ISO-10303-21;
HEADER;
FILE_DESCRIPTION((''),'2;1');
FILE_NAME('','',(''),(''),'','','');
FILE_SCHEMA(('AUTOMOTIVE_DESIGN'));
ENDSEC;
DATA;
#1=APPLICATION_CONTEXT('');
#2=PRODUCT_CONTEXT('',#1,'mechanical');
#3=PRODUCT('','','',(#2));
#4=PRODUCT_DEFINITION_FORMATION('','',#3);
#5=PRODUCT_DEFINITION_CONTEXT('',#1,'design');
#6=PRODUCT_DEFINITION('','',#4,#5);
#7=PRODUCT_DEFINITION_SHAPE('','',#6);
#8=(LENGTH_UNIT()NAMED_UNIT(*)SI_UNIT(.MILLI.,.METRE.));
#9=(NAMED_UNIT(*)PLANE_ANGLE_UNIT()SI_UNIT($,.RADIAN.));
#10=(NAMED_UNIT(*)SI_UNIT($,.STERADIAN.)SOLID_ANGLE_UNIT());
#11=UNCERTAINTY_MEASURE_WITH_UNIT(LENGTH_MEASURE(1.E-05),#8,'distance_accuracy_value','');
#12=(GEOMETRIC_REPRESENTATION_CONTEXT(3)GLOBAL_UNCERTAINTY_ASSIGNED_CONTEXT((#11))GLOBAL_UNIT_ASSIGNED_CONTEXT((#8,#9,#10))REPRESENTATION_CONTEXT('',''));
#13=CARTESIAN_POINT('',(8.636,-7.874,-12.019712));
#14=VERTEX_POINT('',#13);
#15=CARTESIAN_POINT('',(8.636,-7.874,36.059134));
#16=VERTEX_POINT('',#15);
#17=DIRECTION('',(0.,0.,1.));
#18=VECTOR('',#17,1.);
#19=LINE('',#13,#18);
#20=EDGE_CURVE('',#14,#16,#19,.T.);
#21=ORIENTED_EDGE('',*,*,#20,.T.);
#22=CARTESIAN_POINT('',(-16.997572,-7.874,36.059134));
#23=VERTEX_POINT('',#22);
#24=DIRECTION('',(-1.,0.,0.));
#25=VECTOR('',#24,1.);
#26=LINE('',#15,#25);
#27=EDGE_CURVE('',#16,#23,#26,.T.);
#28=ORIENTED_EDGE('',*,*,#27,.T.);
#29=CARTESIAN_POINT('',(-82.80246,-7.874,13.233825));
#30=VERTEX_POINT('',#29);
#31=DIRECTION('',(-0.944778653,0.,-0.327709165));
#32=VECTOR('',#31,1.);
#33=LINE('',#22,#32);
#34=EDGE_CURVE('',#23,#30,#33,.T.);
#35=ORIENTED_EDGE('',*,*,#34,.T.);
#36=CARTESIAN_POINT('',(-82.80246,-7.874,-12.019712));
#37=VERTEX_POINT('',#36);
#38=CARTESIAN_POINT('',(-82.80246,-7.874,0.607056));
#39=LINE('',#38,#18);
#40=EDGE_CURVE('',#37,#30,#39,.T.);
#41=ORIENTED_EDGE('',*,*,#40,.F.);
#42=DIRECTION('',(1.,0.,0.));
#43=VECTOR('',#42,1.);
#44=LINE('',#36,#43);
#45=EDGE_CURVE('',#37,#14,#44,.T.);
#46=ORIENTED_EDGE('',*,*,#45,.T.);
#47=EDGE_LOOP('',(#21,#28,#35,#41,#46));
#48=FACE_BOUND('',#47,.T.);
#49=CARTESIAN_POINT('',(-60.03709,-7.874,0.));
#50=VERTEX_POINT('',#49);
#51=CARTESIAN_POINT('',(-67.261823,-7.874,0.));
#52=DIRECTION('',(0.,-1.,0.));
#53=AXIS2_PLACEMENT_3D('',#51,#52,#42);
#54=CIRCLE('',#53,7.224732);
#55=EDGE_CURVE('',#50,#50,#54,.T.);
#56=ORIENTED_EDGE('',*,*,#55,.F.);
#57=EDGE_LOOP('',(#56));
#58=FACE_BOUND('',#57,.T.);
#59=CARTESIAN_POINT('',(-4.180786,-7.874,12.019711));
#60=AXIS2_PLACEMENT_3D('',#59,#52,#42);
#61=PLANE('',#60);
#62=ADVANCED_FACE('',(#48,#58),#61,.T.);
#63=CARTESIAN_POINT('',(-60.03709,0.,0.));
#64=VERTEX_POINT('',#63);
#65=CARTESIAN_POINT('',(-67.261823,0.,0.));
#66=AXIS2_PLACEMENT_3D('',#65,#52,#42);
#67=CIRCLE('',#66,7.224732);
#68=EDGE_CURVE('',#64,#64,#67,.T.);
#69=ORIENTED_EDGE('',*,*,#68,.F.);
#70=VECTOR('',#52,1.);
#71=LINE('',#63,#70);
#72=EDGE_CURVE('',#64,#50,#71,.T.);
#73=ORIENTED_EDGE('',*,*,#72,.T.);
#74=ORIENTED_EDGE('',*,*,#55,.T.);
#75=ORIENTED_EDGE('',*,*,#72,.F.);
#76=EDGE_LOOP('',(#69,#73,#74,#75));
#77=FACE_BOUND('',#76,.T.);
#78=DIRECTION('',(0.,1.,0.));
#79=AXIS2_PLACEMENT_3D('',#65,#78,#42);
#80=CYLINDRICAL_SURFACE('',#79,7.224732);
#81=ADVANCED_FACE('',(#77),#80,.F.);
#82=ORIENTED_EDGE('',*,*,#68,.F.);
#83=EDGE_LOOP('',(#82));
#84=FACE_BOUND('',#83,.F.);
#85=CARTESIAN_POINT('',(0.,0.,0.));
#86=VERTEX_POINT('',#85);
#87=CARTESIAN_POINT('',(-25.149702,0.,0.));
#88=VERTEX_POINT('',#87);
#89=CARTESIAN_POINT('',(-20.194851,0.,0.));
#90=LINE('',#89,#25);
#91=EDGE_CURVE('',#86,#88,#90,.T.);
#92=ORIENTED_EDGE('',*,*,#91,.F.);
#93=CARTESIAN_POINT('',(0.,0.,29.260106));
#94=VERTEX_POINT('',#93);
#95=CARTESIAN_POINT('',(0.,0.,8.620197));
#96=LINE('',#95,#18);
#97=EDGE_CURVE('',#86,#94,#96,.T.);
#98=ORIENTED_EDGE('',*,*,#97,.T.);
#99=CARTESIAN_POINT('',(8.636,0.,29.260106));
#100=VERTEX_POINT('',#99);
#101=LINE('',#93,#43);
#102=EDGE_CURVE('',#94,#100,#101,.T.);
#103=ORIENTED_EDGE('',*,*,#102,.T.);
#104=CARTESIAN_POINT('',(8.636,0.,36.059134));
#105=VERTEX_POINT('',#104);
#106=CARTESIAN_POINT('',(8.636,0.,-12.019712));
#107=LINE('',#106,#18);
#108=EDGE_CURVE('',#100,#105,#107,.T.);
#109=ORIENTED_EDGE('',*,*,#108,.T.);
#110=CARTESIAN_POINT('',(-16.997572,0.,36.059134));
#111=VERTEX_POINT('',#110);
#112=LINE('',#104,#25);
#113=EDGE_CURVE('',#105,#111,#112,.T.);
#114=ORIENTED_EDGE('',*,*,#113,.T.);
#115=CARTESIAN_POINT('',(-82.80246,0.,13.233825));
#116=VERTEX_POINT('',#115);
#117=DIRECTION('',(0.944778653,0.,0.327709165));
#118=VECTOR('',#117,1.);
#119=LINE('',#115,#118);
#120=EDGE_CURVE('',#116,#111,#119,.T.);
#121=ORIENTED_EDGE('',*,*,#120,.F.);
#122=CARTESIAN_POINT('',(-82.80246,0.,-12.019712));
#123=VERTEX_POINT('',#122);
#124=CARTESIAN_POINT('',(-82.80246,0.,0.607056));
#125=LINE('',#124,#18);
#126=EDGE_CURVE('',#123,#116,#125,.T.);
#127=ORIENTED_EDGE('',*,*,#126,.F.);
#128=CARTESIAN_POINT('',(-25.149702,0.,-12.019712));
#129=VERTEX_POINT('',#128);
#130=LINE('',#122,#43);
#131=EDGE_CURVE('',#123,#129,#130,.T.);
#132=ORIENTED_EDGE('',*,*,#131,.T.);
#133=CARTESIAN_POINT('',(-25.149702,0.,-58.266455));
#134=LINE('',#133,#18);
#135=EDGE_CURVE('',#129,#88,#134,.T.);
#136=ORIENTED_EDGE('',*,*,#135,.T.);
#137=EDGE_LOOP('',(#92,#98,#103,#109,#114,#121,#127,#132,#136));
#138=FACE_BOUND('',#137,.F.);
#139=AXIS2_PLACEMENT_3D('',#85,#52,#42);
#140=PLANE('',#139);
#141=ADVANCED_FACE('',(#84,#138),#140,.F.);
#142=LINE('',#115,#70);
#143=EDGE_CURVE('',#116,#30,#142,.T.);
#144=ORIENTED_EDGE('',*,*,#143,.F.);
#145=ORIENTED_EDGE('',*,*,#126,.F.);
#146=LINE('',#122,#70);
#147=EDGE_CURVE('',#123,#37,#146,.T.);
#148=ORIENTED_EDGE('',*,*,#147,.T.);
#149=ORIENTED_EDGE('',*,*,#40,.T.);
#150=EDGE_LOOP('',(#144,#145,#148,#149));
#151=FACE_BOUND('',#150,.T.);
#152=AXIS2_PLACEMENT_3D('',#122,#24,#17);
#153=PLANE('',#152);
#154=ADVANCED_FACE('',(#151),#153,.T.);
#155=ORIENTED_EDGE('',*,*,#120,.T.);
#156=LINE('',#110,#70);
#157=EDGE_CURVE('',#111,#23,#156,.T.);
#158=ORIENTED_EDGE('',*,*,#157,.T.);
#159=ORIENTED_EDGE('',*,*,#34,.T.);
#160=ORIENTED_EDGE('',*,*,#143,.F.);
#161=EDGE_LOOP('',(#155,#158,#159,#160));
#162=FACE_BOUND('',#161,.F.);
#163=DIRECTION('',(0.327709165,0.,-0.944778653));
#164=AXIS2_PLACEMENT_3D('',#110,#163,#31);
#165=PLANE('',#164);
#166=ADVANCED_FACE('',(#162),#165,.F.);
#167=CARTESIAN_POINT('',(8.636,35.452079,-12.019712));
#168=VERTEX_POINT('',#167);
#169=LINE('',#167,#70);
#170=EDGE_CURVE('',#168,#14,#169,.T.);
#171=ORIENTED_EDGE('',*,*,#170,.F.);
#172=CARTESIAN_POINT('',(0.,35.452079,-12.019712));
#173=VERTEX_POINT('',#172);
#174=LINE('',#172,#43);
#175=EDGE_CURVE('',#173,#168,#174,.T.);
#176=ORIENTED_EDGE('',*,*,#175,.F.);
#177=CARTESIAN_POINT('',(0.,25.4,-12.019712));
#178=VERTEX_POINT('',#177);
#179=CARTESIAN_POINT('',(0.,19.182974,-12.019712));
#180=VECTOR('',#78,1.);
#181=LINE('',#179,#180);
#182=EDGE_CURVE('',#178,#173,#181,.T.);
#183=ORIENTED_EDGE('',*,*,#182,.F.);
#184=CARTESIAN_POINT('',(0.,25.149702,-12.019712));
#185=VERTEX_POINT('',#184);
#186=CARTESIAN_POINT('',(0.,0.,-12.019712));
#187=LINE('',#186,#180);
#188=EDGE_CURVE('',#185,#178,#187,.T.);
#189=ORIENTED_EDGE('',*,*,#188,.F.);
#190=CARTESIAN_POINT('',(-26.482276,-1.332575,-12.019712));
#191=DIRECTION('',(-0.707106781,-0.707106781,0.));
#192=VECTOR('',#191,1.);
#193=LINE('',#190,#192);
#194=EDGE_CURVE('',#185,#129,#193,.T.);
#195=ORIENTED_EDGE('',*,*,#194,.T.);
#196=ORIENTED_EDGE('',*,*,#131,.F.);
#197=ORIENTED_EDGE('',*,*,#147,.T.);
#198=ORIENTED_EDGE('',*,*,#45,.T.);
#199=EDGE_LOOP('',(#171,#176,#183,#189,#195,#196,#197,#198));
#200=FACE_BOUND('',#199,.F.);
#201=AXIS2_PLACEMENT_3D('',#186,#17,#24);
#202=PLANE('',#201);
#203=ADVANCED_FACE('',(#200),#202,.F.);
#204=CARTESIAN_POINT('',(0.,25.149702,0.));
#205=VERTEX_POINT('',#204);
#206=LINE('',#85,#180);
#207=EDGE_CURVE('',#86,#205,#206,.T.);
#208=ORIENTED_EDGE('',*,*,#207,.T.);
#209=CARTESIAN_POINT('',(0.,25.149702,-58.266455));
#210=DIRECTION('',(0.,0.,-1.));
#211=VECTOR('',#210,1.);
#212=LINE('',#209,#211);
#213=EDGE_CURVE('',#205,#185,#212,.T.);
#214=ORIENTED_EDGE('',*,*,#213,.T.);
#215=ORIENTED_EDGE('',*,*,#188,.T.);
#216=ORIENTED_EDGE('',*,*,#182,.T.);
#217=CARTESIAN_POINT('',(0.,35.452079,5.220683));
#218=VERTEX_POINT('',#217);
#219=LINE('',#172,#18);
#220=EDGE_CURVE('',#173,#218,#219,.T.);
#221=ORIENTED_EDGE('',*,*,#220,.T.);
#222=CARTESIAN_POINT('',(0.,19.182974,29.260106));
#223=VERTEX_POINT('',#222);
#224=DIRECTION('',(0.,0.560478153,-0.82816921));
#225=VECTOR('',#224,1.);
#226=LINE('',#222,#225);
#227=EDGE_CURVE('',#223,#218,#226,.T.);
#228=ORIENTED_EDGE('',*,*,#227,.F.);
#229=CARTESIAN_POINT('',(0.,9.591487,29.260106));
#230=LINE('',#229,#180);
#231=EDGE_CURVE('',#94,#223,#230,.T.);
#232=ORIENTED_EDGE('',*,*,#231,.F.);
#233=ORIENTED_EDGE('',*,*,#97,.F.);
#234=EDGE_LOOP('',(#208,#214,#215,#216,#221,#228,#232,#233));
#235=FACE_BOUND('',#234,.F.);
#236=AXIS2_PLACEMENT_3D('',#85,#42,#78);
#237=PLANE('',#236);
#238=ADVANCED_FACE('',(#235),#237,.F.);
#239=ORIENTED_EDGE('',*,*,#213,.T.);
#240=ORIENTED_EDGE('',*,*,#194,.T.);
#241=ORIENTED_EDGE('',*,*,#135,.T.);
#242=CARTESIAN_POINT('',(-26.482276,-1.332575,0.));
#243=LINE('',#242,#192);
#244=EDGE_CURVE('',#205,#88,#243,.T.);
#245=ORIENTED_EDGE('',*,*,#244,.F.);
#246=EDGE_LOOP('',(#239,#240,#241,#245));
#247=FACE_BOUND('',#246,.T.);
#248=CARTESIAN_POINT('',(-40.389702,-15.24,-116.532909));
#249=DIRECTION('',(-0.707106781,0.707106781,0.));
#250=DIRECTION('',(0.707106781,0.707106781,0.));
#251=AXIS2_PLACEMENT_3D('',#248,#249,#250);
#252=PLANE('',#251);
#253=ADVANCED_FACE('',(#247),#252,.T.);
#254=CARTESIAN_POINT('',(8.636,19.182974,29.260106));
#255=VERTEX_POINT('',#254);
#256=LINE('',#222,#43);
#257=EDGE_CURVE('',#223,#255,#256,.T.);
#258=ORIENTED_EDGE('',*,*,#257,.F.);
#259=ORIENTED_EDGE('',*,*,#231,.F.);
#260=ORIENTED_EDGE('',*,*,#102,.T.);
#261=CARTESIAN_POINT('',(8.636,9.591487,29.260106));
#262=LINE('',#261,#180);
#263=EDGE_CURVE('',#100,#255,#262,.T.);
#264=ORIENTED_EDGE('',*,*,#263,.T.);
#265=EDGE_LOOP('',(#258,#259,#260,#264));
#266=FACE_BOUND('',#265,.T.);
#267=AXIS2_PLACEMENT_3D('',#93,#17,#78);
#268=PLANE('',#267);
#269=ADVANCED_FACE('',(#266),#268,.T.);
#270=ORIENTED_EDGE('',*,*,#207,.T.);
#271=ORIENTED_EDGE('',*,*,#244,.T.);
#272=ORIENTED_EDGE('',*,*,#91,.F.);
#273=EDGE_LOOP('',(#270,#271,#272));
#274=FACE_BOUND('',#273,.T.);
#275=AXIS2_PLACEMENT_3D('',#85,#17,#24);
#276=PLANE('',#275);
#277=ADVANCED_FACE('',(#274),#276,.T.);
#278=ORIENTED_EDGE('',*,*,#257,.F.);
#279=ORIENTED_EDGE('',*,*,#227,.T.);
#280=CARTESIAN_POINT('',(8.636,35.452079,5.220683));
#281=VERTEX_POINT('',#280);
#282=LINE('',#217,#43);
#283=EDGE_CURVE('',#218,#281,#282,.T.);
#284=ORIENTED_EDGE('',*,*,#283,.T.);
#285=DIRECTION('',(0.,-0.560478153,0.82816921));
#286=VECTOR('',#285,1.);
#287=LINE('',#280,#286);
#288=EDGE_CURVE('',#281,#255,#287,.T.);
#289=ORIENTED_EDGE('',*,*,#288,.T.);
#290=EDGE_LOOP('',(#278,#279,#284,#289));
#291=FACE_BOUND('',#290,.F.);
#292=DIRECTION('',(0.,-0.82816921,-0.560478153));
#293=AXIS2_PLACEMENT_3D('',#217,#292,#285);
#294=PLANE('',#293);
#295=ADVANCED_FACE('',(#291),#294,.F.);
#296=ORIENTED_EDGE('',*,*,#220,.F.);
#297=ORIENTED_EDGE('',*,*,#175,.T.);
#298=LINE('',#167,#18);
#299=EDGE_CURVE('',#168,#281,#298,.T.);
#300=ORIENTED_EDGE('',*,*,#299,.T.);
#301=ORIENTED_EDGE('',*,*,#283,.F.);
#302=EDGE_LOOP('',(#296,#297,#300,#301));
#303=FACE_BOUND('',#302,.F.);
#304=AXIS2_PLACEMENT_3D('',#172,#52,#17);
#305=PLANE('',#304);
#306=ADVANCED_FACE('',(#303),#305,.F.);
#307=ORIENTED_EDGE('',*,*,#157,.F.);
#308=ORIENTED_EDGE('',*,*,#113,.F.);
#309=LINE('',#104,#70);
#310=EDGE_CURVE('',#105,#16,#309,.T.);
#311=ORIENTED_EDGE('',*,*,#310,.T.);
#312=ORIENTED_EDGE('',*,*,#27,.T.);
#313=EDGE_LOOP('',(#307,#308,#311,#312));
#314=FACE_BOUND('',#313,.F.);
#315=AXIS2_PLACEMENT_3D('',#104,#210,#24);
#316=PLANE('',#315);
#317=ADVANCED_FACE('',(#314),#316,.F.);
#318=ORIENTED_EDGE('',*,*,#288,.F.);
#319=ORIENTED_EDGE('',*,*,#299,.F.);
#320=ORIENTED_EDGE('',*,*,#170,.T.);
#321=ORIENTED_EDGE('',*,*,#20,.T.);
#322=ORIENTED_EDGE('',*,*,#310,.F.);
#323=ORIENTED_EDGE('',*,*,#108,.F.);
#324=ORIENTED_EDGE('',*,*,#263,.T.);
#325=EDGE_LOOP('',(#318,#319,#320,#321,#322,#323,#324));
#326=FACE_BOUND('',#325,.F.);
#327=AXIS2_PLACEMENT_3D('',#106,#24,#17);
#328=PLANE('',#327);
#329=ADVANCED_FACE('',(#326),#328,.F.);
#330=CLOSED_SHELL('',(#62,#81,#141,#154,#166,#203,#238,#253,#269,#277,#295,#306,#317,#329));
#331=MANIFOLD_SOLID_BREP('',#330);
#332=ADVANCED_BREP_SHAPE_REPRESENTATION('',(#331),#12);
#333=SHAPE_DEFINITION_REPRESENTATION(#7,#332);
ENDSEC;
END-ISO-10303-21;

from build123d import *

# Parameters (mm, degrees)
F0_W        = 19.1829744726
F0_H        = 41.2798188627
F1_DEPTH    = 8.636
F2_W        = 65.804887563
F2_H        = 25.253537111
F2_R        = 7.2247324081
F3_DEPTH    = 7.874
F4_W        = 40.3897017241
F4_H        = 12.0197124779
F5_DEPTH    = 25.4
F6_T4_DEPTH = 221.0461057398


# Not quite as in the source:
# - a fillet or chamfer that OpenCascade refuses, or shapes differently, is made with other operations: its cross-section is extruded or revolved along the edge and cut away or added


with BuildPart() as f1:
    # F0 (on Right) → F1 (new body)
    with BuildSketch(Plane.YZ):
        with Locations((9.5914872363, 8.6201969534)):
            Rectangle(F0_W, F0_H)
        Polygon((35.4520790279, 5.2206832916), (19.1829744726, 29.2601063848), (19.1829744726, -12.0197124779), (35.4520790279, -12.0197124779), align=None)
    extrude(amount=F1_DEPTH)

    # F2 (on face) → F3 (join)
    with BuildSketch(Plane.XZ):
        Polygon((-16.9975720346, -12.0197124779), (8.636, -12.0197124779), (8.636, 36.0591337085), (-16.9975720346, 36.0591337085), (-16.9975720346, 13.2338246331), align=None)
        with Locations((-49.9000158161, 0.6070560776)):
            Rectangle(F2_W, F2_H)
        with Locations((-67.2618225217, 0)):
            Circle(F2_R, mode=Mode.SUBTRACT)
        Polygon((-82.8024595976, 13.2338246331), (-16.9975720346, 13.2338246331), (-16.9975720346, 36.0591337085), align=None)
    extrude(amount=F3_DEPTH)

    # F4 (on face) → F5 (join)
    with BuildSketch(Plane(origin=(0, 0, 0), x_dir=(-1, 0, 0), z_dir=(0, 1, 0))):
        with Locations((20.194850862, -6.009856239)):
            Rectangle(F4_W, F4_H)
    extrude(amount=F5_DEPTH)

    # F6: chamfer of 40.64 on 1 edges, made by hand


with BuildPart() as f6_tool2:
    # F6_s3 → F6_t4 (new body)
    with BuildSketch(Plane.XY.offset(-116.5329091089)):
        Polygon((-40.3897017241, -15.24), (0.2502982759, 25.4), (-40.3897017241, 25.4), align=None)
    extrude(amount=F6_T4_DEPTH)

    split(bisect_by=Plane.XZ, keep=Keep.BOTTOM)

    split(bisect_by=Plane.YZ, keep=Keep.BOTTOM)


with BuildPart() as f1_1:
    add(f1.part)

    # F6_t1: cut F6_tool2
    add(f6_tool2.part, mode=Mode.SUBTRACT)


solid = f1_1.part
